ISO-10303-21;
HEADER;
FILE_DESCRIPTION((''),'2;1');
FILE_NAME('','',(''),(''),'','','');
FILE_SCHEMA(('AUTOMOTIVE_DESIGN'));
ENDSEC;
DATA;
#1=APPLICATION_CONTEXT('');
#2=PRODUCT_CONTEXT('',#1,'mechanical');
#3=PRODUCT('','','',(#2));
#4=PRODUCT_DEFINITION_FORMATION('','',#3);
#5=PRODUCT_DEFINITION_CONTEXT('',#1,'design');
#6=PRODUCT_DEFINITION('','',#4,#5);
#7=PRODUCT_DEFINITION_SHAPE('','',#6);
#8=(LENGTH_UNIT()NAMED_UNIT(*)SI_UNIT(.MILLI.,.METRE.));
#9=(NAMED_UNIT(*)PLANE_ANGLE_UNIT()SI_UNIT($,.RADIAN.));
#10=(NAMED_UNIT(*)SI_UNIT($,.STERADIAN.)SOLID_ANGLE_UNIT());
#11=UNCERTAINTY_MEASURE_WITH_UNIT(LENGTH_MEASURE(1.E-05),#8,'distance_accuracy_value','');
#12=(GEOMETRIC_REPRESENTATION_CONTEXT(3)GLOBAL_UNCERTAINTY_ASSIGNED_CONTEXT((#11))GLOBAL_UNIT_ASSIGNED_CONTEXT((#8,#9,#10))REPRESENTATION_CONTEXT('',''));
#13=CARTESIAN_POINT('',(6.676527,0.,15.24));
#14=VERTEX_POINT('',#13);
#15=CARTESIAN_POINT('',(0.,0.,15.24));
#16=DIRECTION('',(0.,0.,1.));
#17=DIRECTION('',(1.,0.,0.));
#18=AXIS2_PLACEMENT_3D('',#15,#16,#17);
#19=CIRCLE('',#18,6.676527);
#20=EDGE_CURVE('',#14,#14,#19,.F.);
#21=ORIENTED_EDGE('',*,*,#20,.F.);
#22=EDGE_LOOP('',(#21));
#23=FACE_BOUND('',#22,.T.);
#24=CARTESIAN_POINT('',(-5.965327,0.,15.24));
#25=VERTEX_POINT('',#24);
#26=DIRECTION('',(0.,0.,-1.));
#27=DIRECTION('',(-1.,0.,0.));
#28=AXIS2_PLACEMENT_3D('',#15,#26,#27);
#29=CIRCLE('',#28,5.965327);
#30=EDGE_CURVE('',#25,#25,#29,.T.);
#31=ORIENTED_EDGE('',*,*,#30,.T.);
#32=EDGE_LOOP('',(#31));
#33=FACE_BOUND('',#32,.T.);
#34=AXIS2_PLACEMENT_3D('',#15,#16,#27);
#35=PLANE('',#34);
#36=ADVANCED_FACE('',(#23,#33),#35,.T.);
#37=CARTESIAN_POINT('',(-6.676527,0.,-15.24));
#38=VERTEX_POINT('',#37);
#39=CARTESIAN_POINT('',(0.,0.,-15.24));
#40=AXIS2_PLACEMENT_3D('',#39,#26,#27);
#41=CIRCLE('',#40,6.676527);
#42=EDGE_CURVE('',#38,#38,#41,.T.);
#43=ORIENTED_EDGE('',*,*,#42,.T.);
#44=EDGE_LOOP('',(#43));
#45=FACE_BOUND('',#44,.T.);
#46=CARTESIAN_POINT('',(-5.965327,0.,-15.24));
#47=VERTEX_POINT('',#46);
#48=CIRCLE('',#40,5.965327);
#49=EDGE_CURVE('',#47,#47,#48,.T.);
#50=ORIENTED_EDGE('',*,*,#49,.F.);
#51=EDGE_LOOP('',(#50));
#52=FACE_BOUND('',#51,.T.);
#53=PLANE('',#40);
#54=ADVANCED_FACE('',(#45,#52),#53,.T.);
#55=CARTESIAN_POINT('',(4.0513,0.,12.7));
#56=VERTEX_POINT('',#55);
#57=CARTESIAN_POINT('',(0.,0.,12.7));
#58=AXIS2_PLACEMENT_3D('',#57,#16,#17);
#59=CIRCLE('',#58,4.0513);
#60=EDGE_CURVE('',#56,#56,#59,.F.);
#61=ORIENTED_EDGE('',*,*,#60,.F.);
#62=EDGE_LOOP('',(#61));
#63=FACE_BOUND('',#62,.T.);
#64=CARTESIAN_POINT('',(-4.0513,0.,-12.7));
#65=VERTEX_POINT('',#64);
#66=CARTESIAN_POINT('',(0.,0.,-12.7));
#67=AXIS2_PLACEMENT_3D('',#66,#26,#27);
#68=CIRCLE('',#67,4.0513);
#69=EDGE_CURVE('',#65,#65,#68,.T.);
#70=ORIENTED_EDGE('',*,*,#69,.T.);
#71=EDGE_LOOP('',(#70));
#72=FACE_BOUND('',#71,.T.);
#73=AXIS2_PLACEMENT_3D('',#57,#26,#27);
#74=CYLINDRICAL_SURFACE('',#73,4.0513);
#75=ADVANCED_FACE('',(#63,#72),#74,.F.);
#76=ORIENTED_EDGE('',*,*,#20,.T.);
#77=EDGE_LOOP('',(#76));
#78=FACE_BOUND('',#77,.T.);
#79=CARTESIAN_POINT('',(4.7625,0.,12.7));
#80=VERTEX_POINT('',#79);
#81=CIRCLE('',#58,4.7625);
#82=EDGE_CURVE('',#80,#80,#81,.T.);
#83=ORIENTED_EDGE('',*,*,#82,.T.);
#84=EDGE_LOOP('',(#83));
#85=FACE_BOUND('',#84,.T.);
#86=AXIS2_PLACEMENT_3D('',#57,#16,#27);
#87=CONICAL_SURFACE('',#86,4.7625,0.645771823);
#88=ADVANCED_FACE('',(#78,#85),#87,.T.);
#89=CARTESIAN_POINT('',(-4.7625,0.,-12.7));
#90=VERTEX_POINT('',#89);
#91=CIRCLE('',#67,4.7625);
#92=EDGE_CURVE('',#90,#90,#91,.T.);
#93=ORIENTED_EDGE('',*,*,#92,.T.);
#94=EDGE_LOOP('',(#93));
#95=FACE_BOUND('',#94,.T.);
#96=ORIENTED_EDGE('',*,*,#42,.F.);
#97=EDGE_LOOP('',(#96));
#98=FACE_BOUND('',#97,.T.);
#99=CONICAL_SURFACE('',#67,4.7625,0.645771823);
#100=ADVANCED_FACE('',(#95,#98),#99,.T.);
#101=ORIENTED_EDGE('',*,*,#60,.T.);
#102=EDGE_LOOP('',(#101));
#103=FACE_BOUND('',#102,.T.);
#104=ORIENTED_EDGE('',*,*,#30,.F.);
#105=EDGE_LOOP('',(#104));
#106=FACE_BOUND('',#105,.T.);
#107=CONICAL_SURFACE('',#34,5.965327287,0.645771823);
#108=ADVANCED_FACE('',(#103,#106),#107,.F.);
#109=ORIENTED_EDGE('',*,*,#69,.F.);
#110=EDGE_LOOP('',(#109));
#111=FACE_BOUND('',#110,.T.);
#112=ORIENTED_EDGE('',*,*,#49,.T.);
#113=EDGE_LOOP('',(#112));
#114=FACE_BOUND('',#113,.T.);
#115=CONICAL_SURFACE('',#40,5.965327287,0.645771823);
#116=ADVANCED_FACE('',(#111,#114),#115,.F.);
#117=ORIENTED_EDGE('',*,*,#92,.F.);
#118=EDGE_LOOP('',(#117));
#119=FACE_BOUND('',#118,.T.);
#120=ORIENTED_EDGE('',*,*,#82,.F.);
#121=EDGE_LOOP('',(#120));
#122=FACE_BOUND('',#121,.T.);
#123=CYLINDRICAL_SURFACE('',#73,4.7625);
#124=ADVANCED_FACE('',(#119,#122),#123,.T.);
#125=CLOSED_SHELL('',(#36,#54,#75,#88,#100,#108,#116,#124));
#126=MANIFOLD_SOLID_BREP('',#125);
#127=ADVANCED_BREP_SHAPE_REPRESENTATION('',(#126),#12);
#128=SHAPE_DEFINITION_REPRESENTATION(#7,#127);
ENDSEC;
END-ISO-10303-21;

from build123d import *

# Parameters (mm, degrees)
SKETCH2_R           = 4.7625
SKETCH2_R_2         = 4.0513
BOSS_EXTRUDE1_DEPTH = 12.7
SKETCH4_R           = 4.7625
BOSS_EXTRUDE2_DEPTH = 2.54
BOSS_EXTRUDE2_TAPER = -37


with BuildPart() as part:
    # Sketch2 → Boss-Extrude1 (new, symmetric)
    with BuildSketch(Plane.XY):
        Circle(SKETCH2_R)
        Circle(SKETCH2_R_2, mode=Mode.SUBTRACT)
    extrude(amount=BOSS_EXTRUDE1_DEPTH, both=True)

    # Sketch4 → Boss-Extrude2 (add)
    with BuildSketch(Plane(origin=(0, 0, -12.7), x_dir=(-1, 0, 0), z_dir=(0, 0, -1))):
        Circle(SKETCH4_R)
    boss_extrude2 = extrude(amount=BOSS_EXTRUDE2_DEPTH, taper=BOSS_EXTRUDE2_TAPER)

    # Cut-Extrude2 cone 1 section (through the dimple's axis) → Cut-Extrude2 (revolve, cut)
    with BuildSketch(Plane(origin=(0, 0, -15.24), x_dir=(0, 1, 0), z_dir=(1, 0, 0))):
        Polygon((0, 0), (5.965327287, 0), (0, 7.916256686), align=None)
    cut_extrude2 = revolve(axis=Axis((0, 0, -15.24), (0, 0, 1)), mode=Mode.SUBTRACT)

    # Mirror1: Boss-Extrude2, Cut-Extrude2 across plane
    add(boss_extrude2.mirror(Plane.XY))
    add(cut_extrude2.mirror(Plane.XY), mode=Mode.SUBTRACT)


solid = part.part
